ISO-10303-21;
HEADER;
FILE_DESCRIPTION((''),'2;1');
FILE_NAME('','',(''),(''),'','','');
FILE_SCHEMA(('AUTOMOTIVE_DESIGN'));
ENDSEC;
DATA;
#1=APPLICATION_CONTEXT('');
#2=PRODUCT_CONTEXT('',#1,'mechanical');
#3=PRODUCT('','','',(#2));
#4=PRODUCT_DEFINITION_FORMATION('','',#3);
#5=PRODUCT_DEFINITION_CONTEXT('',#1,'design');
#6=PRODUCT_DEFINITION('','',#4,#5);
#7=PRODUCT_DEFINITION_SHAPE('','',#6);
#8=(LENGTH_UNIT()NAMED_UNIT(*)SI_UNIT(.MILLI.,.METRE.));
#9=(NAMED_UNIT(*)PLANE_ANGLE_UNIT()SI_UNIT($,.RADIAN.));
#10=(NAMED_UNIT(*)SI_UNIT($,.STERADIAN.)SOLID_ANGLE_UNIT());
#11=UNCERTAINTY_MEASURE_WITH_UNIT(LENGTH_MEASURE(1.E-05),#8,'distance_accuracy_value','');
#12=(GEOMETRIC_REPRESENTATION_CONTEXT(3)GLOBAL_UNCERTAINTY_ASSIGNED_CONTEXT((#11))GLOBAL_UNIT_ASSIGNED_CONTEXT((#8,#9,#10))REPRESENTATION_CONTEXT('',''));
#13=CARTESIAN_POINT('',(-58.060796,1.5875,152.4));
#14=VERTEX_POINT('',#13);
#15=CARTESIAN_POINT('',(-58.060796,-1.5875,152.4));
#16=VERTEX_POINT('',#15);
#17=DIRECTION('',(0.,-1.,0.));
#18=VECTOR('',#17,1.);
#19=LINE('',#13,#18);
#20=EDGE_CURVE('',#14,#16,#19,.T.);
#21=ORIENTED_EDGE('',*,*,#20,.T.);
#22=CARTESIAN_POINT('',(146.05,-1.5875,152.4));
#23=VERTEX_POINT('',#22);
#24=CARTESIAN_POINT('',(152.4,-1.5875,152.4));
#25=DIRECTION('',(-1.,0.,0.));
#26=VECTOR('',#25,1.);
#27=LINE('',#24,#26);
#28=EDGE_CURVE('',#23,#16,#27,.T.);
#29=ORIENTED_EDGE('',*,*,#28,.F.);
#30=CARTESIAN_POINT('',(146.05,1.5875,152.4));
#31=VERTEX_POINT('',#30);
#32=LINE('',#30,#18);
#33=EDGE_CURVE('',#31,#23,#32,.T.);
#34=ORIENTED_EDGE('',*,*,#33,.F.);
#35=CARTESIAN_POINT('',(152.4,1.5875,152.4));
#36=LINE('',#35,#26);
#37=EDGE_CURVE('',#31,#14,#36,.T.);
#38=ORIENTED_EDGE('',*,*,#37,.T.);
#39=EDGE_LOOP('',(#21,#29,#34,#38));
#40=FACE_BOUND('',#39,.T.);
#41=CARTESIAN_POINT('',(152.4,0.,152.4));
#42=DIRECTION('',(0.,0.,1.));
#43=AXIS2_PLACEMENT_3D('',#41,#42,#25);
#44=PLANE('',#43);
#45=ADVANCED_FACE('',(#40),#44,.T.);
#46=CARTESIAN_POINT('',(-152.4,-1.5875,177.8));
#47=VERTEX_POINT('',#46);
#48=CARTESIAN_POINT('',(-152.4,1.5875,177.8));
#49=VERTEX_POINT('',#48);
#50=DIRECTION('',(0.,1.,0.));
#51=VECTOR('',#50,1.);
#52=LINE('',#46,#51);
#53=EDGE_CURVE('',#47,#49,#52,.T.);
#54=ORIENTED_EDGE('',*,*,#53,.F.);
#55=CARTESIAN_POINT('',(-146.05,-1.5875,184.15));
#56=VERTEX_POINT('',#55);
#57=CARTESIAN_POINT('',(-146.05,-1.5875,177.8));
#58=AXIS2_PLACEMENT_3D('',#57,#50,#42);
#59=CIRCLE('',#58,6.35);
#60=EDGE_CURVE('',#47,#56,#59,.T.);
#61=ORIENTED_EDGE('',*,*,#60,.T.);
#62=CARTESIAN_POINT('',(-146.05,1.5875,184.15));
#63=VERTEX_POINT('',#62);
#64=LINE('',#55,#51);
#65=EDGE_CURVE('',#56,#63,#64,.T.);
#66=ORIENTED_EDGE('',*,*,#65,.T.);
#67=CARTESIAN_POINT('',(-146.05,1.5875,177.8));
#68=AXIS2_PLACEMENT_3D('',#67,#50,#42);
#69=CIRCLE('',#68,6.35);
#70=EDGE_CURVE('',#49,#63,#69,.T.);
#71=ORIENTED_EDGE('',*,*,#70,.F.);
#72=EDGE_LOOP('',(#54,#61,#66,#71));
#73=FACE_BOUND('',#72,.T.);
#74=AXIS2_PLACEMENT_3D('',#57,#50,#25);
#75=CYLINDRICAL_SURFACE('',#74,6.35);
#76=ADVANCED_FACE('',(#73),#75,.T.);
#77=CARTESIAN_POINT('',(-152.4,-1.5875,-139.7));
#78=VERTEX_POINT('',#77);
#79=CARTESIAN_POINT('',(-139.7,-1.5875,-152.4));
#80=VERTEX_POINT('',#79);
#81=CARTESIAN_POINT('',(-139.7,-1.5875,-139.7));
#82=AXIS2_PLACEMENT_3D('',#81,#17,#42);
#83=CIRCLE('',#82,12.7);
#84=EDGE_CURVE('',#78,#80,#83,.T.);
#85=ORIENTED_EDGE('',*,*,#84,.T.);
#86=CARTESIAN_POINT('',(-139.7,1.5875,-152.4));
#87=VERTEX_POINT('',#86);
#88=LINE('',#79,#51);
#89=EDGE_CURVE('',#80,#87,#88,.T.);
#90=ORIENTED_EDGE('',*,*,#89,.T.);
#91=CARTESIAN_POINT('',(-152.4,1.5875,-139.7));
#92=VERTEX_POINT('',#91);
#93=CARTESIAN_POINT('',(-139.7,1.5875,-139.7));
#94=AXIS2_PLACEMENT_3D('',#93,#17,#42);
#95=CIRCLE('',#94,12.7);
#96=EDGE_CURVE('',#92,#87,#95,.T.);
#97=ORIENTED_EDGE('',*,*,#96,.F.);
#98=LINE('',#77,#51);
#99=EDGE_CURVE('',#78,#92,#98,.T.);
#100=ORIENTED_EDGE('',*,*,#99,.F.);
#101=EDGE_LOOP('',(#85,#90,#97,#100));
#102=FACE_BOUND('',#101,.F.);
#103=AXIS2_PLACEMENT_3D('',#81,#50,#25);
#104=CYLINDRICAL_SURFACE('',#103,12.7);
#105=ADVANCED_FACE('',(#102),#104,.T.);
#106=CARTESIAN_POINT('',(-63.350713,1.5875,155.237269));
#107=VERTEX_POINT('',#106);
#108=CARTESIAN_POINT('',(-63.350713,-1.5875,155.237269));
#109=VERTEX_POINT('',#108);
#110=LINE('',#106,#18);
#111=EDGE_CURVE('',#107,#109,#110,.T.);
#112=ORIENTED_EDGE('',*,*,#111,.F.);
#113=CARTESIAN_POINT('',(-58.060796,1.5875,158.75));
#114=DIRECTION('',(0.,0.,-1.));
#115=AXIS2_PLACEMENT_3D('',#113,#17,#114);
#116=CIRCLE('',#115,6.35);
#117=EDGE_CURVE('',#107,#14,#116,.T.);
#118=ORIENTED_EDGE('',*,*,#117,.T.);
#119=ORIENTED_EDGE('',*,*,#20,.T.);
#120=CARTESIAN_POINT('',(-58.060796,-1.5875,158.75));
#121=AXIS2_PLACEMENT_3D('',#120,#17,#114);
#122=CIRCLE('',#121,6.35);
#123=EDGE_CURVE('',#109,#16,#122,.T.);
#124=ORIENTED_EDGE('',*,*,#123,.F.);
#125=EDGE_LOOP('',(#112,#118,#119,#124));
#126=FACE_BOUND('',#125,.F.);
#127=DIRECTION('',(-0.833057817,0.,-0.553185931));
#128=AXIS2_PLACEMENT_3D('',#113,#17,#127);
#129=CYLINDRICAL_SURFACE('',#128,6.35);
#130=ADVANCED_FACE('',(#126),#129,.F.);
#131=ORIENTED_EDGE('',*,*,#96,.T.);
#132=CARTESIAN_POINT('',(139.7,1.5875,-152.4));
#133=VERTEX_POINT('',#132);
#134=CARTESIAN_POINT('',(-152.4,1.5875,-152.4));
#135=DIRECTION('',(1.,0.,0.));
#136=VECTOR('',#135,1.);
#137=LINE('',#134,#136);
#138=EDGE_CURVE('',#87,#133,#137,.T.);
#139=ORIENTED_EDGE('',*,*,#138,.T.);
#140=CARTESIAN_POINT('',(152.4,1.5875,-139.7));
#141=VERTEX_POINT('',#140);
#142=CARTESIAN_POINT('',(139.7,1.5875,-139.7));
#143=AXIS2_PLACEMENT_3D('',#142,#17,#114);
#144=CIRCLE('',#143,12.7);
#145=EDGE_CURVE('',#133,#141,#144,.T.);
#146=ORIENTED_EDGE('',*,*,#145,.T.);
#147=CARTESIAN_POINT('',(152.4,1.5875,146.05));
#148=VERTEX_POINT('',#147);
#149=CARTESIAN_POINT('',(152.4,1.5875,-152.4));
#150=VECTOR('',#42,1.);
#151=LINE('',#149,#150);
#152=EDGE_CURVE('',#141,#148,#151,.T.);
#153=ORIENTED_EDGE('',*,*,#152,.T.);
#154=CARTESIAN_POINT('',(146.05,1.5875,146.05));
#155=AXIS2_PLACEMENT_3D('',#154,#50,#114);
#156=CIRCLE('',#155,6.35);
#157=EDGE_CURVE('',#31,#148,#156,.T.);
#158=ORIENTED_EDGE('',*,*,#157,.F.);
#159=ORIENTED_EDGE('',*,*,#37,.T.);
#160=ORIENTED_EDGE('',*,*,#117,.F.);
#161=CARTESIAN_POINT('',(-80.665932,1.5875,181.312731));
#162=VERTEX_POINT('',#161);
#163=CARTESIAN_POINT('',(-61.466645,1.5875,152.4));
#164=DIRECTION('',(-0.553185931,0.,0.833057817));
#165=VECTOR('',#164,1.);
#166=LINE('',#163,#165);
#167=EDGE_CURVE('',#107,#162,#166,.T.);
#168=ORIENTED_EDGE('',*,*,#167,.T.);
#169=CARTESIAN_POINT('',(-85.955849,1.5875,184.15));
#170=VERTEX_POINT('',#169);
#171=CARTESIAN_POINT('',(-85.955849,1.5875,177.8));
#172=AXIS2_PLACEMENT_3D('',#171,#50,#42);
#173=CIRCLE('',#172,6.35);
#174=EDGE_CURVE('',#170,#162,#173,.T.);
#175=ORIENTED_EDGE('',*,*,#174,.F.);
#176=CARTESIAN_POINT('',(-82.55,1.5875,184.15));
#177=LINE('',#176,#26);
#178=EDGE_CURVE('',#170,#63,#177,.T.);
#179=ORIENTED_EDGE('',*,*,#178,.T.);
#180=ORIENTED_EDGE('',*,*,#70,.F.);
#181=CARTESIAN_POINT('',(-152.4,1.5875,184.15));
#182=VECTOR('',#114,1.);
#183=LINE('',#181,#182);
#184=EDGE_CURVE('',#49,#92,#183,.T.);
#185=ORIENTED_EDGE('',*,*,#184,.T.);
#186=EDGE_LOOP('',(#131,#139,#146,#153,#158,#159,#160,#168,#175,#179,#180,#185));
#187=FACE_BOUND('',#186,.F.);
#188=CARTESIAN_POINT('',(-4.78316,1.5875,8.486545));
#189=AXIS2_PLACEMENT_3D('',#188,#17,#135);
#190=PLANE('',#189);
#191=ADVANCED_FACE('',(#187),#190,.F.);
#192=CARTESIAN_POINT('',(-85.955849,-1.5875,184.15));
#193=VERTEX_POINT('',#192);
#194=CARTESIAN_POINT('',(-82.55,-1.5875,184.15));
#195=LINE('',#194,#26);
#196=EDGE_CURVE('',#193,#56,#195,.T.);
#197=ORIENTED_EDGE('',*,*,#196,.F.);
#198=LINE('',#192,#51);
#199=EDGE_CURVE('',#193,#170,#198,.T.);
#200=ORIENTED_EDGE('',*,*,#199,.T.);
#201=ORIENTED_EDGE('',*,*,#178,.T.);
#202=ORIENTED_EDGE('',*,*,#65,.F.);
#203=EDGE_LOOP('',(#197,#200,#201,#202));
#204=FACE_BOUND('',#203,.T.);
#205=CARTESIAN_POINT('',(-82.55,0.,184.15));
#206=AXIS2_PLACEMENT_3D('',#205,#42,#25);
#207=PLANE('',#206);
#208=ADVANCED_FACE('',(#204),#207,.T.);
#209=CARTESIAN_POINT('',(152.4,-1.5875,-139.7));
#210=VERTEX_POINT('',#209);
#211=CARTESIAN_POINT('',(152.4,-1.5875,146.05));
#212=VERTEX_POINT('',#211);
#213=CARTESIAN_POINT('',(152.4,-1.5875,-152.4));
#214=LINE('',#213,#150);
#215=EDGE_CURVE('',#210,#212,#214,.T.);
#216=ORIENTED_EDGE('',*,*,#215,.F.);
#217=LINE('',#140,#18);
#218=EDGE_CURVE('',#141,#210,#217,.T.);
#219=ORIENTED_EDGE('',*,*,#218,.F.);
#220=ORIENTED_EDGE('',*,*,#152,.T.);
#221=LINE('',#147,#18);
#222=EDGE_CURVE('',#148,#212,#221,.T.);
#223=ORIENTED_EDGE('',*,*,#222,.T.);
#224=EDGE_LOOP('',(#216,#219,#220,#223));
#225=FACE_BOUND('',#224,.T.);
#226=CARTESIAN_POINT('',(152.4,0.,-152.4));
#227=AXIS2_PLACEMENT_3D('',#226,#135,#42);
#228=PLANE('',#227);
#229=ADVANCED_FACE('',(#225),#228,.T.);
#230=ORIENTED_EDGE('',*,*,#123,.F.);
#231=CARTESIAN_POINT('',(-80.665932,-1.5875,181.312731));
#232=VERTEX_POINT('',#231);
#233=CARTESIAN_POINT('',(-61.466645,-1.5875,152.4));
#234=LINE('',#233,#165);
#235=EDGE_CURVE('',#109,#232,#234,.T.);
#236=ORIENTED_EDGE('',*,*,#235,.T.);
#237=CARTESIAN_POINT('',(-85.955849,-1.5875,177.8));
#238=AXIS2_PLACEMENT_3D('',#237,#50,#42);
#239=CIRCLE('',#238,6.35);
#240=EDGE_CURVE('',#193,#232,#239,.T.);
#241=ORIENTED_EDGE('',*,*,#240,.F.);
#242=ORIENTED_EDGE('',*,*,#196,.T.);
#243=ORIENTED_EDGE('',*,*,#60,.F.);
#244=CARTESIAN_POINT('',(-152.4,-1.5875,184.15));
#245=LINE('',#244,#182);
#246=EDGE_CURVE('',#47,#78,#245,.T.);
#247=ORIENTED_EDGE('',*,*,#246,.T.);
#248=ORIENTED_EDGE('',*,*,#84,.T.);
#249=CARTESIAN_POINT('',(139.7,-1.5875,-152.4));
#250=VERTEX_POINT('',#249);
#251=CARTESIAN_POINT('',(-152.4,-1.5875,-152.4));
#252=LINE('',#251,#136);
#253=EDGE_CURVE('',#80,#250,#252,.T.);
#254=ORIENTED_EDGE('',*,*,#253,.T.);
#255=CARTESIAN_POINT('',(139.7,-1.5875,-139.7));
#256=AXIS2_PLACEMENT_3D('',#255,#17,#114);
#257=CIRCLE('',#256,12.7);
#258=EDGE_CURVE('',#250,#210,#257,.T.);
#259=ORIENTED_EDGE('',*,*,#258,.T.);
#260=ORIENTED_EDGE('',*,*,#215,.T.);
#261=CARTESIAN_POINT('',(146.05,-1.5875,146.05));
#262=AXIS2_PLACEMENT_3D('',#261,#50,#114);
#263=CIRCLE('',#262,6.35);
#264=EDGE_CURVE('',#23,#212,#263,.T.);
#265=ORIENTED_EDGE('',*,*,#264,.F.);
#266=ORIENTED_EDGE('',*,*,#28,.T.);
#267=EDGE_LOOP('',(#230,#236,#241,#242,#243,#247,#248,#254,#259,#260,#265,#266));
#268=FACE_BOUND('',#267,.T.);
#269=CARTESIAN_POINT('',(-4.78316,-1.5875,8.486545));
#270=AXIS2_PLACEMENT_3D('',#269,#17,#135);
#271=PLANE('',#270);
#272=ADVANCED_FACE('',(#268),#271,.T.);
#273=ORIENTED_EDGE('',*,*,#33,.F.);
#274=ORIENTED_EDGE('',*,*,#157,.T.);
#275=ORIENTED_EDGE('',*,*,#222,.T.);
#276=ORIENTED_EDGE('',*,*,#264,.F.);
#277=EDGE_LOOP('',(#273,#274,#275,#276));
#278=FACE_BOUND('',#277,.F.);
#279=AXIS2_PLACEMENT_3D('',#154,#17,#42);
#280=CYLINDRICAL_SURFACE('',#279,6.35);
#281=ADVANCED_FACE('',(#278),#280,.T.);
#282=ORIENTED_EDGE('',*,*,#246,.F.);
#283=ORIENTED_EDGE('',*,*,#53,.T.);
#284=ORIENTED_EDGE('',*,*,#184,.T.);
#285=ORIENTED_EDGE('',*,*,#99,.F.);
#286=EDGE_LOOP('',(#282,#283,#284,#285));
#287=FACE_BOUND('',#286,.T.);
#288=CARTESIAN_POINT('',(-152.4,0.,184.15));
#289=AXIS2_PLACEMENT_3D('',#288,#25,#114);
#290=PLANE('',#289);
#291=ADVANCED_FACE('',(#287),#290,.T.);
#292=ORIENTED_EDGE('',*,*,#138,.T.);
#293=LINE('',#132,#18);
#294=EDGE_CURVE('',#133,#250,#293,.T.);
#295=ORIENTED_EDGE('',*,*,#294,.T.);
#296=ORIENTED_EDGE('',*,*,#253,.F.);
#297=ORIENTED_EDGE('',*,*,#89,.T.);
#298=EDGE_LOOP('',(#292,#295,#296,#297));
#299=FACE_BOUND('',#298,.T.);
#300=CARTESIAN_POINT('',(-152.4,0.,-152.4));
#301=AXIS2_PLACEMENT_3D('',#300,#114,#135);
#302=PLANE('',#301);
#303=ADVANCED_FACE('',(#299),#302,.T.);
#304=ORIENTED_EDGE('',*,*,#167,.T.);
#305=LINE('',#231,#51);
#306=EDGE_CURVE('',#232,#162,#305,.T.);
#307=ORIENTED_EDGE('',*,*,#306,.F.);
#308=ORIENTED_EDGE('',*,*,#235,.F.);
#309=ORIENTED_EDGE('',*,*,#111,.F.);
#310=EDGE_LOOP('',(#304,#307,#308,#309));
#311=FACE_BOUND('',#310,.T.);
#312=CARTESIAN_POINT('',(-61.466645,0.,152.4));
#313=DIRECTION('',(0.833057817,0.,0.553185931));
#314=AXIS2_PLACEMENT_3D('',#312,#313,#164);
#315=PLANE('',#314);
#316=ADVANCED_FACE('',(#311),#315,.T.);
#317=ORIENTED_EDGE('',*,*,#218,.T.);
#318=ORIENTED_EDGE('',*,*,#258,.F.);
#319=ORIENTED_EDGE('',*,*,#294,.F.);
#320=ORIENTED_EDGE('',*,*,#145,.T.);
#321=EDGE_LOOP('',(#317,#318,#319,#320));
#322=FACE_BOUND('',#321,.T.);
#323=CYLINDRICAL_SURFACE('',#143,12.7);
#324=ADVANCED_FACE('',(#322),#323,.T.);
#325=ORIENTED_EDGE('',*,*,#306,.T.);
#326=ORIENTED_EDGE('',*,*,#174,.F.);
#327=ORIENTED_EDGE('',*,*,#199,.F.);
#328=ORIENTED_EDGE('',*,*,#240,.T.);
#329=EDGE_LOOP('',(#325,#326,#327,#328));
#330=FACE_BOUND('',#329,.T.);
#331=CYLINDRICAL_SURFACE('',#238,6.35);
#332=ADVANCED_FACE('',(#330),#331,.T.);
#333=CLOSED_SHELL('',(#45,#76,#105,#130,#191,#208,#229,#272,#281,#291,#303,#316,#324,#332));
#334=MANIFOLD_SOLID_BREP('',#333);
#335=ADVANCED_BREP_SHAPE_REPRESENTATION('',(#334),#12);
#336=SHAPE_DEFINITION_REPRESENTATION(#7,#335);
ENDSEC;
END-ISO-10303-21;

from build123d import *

# Parameters (mm, degrees)
F1_DEPTH = 1.5875
F2_R     = 6.35
F3_R     = 12.7


with BuildPart() as f1:
    # F0 (on Front) → F1 (new body, symmetric)
    with BuildSketch(Plane.XZ):
        Polygon((-152.4, 152.4), (-152.4, -152.4), (152.4, -152.4), (152.4, 152.4), (-61.4666454494, 152.4), (-82.55, 184.15), (-152.4, 184.15), align=None)
    extrude(amount=F1_DEPTH, both=True)

    # F2
    f2_edges = [f1.edges().sort_by_distance(p)[0] for p in [
        (152.4, 0, 152.4),
        (-152.4, 0, 184.15),
        (-61.466645, 0, 152.4),
        (-82.55, 0, 184.15),
    ]]
    fillet(f2_edges, radius=F2_R)

    # F3
    f3_edges = [f1.edges().sort_by_distance(p)[0] for p in [
        (152.4, 0, -152.4),
        (-152.4, 0, -152.4),
    ]]
    fillet(f3_edges, radius=F3_R)


solid = f1.part
